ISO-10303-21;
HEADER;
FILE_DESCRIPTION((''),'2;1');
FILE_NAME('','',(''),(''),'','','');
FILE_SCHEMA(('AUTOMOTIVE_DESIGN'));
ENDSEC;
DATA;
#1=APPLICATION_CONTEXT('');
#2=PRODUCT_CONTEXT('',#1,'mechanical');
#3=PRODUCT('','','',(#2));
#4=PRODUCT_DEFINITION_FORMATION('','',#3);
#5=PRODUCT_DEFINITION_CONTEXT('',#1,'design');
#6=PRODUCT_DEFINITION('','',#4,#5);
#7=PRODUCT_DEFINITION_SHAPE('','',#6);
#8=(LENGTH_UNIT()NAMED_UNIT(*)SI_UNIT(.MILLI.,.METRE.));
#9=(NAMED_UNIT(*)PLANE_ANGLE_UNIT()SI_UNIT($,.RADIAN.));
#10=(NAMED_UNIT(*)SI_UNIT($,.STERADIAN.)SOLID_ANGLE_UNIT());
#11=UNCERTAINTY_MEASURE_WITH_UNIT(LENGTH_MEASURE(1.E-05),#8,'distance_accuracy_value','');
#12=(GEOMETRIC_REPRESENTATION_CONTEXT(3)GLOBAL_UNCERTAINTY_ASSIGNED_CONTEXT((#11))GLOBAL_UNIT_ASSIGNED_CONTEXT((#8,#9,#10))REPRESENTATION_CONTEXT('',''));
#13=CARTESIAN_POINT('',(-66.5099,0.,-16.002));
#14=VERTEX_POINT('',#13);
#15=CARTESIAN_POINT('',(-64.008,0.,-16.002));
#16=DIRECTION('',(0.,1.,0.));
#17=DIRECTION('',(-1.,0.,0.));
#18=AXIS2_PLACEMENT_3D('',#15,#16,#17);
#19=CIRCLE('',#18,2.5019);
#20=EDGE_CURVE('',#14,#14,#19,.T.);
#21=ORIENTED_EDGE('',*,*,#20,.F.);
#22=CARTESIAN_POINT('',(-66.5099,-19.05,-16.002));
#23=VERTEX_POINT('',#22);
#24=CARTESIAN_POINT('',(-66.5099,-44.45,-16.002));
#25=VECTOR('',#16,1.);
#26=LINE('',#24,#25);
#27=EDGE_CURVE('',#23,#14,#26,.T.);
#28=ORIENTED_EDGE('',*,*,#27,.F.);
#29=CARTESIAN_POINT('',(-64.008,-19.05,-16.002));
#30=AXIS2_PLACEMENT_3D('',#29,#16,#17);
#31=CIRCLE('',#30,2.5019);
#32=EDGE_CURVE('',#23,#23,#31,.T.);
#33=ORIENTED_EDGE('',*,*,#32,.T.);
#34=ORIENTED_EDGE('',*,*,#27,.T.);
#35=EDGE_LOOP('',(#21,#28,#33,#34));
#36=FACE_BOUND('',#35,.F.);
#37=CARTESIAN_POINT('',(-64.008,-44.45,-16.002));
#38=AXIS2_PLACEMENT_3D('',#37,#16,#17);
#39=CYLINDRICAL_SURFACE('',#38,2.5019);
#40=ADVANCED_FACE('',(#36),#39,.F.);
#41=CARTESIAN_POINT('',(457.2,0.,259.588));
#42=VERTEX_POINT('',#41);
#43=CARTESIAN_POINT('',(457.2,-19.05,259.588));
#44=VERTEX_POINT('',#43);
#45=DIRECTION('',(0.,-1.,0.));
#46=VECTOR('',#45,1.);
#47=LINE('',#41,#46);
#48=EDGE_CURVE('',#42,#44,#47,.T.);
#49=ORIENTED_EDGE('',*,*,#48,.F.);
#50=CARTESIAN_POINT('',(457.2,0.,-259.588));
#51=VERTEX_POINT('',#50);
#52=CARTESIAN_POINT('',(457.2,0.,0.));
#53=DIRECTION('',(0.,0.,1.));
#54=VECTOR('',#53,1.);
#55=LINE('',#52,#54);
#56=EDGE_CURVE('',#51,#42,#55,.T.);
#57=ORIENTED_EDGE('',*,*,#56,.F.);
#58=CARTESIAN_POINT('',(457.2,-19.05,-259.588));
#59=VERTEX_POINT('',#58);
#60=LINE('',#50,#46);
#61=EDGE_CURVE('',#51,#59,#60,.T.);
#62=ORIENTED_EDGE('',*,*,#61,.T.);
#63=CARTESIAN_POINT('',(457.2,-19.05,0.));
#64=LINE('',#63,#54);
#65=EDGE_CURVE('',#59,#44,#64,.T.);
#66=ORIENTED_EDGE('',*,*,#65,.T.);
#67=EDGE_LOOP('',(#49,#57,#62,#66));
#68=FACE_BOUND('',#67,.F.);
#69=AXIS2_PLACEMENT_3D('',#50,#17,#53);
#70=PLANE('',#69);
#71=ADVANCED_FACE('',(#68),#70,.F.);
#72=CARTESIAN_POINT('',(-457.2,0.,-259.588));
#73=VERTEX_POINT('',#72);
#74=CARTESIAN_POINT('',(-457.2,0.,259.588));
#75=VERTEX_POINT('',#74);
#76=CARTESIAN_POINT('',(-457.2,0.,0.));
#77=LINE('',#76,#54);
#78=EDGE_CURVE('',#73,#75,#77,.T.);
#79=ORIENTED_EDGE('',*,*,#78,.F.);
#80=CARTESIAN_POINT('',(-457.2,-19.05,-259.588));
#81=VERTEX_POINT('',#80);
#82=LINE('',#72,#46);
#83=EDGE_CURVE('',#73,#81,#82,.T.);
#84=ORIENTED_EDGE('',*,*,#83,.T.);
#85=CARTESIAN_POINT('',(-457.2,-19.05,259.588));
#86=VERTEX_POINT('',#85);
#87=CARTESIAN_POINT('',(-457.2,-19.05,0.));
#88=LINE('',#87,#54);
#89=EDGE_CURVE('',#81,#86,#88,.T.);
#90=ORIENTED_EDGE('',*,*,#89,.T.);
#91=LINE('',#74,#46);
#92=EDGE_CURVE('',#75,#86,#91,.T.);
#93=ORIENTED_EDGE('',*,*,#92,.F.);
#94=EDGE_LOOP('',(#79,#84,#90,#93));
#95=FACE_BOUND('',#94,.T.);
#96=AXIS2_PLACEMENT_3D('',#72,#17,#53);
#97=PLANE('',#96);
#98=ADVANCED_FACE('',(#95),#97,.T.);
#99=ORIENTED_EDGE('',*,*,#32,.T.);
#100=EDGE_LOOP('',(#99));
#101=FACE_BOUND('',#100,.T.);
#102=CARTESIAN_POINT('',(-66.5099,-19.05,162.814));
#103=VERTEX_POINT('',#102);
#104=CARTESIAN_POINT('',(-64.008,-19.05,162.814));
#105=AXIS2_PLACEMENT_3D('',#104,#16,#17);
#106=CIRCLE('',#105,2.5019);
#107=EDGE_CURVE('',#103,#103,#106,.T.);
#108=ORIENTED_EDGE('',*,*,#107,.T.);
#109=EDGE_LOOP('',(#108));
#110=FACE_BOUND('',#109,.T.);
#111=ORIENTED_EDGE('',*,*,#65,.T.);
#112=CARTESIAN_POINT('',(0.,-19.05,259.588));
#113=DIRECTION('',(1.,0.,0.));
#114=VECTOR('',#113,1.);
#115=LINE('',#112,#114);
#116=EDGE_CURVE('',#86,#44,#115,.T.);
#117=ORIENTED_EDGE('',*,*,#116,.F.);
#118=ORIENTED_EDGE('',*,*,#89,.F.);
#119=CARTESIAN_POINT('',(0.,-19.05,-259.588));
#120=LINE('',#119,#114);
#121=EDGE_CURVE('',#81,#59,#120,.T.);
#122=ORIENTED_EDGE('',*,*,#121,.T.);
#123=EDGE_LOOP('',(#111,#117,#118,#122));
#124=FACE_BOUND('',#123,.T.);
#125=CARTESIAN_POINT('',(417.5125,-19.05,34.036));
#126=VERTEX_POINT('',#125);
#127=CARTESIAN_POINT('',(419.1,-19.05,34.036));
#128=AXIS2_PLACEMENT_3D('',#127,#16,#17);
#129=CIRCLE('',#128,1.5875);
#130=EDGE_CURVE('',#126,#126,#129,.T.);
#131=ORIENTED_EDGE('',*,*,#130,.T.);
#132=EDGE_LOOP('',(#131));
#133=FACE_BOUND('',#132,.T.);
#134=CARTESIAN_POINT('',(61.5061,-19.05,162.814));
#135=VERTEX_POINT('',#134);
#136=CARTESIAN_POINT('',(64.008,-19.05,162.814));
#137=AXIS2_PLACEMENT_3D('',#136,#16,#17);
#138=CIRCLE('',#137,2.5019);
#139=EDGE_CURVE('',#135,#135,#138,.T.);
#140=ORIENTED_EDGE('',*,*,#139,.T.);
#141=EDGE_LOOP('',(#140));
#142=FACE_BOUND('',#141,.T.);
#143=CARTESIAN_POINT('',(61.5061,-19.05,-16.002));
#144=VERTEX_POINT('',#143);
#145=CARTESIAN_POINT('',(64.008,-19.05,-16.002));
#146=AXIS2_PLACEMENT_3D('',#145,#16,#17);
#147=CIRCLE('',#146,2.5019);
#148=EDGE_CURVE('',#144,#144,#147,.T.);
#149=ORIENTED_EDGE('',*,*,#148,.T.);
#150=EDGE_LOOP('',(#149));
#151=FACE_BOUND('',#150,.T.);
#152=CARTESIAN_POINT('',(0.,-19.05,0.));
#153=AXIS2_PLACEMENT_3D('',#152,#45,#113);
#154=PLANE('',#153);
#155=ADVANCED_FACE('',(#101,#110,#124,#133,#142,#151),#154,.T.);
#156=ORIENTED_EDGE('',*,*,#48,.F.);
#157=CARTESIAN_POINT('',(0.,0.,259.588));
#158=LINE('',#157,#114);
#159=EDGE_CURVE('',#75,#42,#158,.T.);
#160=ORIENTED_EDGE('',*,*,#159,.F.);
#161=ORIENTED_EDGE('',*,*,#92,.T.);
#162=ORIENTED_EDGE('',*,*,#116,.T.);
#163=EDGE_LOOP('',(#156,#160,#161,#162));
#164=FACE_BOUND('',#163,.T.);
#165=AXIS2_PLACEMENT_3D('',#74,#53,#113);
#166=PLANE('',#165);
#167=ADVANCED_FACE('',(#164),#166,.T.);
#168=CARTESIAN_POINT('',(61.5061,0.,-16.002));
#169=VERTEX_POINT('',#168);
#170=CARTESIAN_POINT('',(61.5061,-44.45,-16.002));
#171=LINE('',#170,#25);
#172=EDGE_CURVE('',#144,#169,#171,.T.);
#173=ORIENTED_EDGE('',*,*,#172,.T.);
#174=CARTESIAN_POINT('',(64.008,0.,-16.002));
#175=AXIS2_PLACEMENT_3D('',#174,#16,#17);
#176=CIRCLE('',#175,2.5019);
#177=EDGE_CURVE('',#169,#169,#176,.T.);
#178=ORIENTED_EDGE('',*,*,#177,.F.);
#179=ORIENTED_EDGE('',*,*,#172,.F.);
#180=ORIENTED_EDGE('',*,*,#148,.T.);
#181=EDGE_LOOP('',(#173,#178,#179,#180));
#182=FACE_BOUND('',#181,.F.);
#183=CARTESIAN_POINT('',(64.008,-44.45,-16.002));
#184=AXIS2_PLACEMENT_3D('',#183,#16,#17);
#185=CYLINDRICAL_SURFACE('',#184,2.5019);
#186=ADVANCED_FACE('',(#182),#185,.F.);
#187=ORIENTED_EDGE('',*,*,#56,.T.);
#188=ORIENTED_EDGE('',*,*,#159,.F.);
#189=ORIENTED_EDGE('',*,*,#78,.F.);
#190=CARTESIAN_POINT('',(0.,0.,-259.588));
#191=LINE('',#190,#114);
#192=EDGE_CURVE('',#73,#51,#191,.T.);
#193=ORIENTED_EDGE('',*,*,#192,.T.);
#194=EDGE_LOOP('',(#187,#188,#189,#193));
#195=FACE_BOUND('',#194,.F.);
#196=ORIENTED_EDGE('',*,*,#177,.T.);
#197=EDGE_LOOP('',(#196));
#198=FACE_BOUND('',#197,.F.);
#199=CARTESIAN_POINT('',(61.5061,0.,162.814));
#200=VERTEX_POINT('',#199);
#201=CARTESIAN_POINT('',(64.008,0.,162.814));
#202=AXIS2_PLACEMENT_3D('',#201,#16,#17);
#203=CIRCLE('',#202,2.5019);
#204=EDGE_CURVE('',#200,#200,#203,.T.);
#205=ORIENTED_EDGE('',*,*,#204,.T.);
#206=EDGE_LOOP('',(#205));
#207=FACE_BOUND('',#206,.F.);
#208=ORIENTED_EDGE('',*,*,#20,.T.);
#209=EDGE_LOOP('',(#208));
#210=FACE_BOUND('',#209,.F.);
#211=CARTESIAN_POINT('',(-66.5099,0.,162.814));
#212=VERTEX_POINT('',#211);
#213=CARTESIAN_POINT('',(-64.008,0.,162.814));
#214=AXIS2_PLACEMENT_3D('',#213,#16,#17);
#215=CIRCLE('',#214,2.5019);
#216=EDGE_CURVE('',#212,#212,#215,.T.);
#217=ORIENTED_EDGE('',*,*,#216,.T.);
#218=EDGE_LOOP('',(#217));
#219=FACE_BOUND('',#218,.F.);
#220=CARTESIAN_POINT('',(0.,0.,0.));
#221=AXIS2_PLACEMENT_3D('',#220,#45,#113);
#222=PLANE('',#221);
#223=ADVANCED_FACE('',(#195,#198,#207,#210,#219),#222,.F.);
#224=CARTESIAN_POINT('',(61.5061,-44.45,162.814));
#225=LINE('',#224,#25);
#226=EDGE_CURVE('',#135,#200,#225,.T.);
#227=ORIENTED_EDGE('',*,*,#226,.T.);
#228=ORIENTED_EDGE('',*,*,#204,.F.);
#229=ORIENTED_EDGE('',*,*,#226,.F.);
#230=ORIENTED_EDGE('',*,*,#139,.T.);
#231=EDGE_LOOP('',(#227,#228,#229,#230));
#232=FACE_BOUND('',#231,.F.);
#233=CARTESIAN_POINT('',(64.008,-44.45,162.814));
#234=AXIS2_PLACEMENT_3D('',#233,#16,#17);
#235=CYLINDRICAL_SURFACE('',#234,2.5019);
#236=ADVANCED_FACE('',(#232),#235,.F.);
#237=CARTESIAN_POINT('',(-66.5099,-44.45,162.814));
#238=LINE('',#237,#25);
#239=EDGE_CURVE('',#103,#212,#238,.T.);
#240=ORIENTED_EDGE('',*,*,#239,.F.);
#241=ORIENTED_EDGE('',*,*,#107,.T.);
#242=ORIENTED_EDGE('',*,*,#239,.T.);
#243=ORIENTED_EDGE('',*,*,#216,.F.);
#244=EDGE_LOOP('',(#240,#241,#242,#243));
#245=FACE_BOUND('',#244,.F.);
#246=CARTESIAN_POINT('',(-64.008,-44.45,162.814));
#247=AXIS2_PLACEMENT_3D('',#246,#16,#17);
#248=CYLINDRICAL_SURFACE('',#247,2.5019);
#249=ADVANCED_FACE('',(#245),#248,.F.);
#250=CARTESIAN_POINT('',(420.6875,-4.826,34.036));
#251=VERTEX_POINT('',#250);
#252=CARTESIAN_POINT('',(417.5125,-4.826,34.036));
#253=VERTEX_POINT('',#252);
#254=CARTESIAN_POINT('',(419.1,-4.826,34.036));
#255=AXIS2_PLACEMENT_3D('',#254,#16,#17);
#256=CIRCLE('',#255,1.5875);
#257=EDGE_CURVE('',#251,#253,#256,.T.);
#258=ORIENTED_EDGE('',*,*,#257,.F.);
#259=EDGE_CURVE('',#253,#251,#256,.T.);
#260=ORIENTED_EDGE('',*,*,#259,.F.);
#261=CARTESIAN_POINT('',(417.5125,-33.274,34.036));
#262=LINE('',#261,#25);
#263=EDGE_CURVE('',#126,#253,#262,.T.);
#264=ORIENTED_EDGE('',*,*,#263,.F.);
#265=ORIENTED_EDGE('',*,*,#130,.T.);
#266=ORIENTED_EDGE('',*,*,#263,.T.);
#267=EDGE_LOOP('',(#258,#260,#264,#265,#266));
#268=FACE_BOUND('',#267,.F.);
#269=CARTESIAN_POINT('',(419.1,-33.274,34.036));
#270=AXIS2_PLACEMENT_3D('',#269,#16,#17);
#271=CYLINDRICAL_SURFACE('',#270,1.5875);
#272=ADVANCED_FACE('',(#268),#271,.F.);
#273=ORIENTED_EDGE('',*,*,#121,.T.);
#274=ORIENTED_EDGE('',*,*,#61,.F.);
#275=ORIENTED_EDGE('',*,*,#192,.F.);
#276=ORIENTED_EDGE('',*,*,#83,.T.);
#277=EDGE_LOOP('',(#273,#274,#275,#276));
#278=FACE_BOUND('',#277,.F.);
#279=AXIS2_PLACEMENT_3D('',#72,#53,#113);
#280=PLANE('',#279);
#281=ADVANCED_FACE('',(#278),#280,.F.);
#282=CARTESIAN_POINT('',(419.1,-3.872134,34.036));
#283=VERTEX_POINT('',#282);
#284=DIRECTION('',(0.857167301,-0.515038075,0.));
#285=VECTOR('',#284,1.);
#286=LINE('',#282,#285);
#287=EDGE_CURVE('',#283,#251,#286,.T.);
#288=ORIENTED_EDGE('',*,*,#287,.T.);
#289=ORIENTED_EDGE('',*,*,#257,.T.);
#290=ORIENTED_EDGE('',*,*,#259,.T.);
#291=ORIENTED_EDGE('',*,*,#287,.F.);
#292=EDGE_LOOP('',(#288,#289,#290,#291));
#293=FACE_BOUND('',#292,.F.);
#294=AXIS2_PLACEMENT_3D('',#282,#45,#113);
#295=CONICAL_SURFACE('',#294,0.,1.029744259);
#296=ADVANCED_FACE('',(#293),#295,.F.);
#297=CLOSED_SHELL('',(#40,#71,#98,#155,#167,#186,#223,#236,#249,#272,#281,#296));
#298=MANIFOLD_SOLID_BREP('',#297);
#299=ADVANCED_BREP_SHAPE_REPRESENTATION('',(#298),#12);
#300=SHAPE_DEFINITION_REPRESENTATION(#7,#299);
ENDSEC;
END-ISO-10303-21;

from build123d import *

# Parameters (mm, degrees)
F0_W     = 914.4
F0_H     = 519.176
F1_DEPTH = 19.05
F3_D     = 5.0038
F3_DEPTH = 25.4
F3_TIP   = 1.5032931827
F5_D     = 3.175
F5_DEPTH = 14.224
F5_TIP   = 0.9538662327


with BuildPart() as f1:
    # F0 (on Front) → F1 (new body)
    with BuildSketch(Plane.XZ):
        Rectangle(F0_W, F0_H)
    extrude(amount=F1_DEPTH)

    # F3
    with Locations(Plane.XZ.offset(19.05)):
        with Locations((-64.008, 162.814), (64.008, 162.814), (-64.008, -16.002), (64.008, -16.002)):
            Hole(F3_D / 2, depth=F3_DEPTH)
            with Locations((0, 0, -(F3_DEPTH + F3_TIP / 2))):  # 118° drill point
                Cone(0, F3_D / 2, F3_TIP, mode=Mode.SUBTRACT)

    # F5
    with Locations(Plane.XZ.offset(19.05)):
        with Locations((419.1, 34.036)):
            Hole(F5_D / 2, depth=F5_DEPTH)
            with Locations((0, 0, -(F5_DEPTH + F5_TIP / 2))):  # 118° drill point
                Cone(0, F5_D / 2, F5_TIP, mode=Mode.SUBTRACT)


solid = f1.part
